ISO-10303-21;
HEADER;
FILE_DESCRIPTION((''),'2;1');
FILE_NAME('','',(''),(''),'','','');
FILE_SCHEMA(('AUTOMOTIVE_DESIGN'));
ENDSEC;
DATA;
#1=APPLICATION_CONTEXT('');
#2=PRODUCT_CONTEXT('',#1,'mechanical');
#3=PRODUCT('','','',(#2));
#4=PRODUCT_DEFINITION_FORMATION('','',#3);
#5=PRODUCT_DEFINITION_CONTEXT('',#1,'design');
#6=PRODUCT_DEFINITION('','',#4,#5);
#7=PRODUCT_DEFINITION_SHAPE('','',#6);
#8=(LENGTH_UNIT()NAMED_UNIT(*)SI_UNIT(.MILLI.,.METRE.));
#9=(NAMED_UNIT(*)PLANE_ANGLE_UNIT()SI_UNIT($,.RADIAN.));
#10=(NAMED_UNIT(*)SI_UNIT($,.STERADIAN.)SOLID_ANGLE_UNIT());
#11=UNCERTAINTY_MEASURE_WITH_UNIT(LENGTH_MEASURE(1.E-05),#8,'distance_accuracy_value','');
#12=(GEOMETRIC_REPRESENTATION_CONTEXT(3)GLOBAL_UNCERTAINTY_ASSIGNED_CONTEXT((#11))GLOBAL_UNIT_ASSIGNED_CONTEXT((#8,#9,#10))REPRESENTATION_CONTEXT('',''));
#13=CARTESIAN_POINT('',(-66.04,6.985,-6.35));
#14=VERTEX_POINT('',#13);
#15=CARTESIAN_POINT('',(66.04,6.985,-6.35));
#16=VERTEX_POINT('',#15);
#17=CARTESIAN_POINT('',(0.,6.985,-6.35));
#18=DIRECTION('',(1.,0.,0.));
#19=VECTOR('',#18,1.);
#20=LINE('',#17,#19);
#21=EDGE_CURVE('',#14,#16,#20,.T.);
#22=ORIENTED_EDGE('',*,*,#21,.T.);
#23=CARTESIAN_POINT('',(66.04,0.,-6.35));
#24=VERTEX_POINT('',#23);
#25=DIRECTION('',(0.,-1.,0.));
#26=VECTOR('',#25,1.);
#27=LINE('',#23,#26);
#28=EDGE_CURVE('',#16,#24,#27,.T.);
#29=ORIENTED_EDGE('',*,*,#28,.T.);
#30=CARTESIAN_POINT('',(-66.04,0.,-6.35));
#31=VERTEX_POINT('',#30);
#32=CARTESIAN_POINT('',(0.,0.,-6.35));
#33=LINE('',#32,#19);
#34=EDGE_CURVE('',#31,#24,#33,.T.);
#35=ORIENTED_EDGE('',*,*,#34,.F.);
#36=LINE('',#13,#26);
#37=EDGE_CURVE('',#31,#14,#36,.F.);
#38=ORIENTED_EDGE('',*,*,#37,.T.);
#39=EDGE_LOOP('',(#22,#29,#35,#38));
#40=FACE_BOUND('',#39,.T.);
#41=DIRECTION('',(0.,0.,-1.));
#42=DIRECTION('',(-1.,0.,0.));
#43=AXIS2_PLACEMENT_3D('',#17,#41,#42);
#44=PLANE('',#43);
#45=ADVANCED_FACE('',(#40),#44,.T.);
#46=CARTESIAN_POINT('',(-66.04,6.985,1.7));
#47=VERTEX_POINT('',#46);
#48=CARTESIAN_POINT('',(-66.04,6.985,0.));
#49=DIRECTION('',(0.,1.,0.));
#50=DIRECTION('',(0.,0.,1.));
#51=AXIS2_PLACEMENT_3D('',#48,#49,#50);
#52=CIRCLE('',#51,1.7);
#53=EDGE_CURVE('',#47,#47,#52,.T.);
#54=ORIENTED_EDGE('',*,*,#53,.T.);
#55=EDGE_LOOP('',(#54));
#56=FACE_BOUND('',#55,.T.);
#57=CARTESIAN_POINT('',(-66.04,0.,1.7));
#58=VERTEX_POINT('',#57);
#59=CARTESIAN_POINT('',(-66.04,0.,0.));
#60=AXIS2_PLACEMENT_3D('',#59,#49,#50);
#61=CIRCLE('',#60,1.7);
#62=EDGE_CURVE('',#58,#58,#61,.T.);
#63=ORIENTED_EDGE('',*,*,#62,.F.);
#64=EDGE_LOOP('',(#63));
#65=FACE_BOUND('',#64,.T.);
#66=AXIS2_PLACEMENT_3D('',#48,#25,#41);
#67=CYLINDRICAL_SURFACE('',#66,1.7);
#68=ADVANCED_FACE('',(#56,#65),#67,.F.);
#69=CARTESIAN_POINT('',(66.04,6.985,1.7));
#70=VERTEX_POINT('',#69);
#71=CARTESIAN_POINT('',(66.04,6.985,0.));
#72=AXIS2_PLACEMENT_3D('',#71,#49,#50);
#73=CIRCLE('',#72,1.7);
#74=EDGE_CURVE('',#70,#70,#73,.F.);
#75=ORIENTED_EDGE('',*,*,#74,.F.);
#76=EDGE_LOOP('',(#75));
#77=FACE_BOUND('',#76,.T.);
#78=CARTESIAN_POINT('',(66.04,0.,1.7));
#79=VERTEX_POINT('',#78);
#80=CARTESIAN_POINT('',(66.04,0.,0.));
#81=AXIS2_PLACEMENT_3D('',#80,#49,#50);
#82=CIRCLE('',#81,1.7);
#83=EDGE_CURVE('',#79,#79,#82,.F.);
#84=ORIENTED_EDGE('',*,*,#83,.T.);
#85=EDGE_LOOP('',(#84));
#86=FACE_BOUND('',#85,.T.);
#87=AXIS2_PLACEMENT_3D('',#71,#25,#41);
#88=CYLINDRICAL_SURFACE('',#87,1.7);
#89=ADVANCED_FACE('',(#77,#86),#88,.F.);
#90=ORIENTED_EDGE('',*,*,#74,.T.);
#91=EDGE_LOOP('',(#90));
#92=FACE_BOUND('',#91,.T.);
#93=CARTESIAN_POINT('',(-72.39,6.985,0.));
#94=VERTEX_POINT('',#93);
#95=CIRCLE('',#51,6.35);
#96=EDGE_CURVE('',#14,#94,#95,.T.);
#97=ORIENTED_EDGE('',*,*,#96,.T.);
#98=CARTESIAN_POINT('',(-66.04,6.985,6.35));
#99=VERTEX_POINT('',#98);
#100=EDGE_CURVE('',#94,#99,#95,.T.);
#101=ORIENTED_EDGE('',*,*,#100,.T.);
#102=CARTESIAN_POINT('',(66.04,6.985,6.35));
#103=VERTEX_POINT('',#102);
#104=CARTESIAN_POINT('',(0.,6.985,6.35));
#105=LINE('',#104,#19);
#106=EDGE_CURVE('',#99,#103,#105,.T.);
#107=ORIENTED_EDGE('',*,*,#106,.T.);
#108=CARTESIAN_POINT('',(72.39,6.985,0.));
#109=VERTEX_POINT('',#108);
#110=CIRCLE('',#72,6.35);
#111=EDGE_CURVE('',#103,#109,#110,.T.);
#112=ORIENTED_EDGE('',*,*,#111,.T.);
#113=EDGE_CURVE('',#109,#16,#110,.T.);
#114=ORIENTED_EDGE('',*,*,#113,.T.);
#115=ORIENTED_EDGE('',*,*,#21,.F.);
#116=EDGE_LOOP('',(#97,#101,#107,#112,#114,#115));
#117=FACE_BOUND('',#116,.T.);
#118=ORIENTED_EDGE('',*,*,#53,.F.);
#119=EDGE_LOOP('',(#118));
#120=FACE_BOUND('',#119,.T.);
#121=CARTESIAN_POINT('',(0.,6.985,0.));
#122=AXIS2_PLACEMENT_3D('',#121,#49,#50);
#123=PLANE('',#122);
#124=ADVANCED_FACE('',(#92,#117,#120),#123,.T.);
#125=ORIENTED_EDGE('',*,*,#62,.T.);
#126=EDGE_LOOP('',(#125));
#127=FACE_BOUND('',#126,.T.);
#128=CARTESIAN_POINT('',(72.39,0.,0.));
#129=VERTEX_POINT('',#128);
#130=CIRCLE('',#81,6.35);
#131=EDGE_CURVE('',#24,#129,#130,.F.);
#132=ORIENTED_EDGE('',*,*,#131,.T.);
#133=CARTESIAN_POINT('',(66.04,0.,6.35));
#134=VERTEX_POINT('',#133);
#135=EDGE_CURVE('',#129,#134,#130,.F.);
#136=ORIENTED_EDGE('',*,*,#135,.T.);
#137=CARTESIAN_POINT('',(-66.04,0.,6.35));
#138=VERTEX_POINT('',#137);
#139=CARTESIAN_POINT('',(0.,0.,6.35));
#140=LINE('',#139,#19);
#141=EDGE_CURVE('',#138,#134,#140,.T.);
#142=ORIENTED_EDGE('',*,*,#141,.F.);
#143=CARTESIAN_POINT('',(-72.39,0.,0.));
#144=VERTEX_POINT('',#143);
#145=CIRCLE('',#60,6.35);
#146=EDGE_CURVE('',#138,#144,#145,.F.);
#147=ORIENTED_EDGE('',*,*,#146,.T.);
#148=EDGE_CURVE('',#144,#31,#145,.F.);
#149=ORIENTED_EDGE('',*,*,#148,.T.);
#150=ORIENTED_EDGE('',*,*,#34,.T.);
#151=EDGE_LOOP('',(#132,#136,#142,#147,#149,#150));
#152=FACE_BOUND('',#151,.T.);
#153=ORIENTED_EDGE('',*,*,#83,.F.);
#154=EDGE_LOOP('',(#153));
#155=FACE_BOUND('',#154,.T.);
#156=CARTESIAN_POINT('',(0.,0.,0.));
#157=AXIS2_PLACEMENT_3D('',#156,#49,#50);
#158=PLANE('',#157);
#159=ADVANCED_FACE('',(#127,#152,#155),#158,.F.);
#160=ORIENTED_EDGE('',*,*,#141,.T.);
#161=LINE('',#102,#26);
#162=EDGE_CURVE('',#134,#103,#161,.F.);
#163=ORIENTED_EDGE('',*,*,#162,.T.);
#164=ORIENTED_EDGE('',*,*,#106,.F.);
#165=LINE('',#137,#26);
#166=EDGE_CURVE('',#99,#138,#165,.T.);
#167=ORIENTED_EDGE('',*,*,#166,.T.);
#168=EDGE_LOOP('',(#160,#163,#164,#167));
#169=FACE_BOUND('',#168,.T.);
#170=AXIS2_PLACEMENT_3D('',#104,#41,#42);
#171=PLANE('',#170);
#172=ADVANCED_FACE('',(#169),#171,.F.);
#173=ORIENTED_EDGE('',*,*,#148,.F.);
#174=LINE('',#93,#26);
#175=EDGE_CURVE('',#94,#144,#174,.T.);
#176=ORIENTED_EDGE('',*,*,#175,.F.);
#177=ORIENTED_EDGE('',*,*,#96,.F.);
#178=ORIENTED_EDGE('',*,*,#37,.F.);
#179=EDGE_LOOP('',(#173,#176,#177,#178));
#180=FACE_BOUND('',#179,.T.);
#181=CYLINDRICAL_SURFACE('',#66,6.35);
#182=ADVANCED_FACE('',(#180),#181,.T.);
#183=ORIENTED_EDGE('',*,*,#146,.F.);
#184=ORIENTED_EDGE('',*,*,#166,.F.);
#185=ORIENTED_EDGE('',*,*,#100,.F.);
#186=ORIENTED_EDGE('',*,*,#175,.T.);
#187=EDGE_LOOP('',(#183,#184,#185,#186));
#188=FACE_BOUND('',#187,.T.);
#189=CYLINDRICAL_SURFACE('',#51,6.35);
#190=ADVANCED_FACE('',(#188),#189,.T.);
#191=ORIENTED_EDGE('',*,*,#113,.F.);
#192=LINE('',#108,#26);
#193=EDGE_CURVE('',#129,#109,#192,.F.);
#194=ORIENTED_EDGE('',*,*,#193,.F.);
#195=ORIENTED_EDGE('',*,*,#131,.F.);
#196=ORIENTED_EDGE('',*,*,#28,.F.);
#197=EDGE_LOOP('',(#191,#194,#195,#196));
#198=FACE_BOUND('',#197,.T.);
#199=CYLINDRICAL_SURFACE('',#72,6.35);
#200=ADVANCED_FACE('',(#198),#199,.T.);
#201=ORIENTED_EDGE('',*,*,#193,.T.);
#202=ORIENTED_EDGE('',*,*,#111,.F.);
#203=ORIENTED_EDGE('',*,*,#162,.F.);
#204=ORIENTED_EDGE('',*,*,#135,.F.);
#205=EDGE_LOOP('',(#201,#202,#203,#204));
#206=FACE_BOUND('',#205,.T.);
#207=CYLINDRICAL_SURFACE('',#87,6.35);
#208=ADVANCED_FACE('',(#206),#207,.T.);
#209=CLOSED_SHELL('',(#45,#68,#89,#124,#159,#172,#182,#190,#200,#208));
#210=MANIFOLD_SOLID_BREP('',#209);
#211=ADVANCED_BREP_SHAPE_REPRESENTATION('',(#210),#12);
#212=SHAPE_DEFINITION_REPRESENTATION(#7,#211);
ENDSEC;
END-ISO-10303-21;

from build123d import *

# Parameters (mm, degrees)
SKETCH1_R           = 1.7
BOSS_EXTRUDE1_DEPTH = 6.985
FILLET1_R           = 6.35


with BuildPart() as part:
    # Sketch1 → Boss-Extrude1 (new body)
    with BuildSketch(Plane(origin=(0, 0, 0), x_dir=(1, 0, 0), z_dir=(0, 1, 0))):
        Polygon((-72.39, 6.35), (-72.39, -6.35), (-6.35, -6.35), (6.35, -6.35), (72.39, -6.35), (72.39, 6.35), (6.35, 6.35), (-6.35, 6.35), align=None)
        with Locations(Location((-66.04, 0, 0), (0, 0, 270))):
            Circle(SKETCH1_R, mode=Mode.SUBTRACT)
        with Locations(Location((66.04, 0, 0), (0, 0, 270))):
            Circle(SKETCH1_R, mode=Mode.SUBTRACT)
    extrude(amount=BOSS_EXTRUDE1_DEPTH)

    # Fillet1
    fillet1_edges = [part.edges().sort_by_distance(p)[0] for p in [
        (72.39, 3.4925, -6.35),
        (-72.39, 3.4925, -6.35),
        (-72.39, 3.4925, 6.35),
        (72.39, 3.4925, 6.35),
    ]]
    fillet(fillet1_edges, radius=FILLET1_R - 0.0001)  # a hair under: the kernel refuses the full size


solid = part.part
